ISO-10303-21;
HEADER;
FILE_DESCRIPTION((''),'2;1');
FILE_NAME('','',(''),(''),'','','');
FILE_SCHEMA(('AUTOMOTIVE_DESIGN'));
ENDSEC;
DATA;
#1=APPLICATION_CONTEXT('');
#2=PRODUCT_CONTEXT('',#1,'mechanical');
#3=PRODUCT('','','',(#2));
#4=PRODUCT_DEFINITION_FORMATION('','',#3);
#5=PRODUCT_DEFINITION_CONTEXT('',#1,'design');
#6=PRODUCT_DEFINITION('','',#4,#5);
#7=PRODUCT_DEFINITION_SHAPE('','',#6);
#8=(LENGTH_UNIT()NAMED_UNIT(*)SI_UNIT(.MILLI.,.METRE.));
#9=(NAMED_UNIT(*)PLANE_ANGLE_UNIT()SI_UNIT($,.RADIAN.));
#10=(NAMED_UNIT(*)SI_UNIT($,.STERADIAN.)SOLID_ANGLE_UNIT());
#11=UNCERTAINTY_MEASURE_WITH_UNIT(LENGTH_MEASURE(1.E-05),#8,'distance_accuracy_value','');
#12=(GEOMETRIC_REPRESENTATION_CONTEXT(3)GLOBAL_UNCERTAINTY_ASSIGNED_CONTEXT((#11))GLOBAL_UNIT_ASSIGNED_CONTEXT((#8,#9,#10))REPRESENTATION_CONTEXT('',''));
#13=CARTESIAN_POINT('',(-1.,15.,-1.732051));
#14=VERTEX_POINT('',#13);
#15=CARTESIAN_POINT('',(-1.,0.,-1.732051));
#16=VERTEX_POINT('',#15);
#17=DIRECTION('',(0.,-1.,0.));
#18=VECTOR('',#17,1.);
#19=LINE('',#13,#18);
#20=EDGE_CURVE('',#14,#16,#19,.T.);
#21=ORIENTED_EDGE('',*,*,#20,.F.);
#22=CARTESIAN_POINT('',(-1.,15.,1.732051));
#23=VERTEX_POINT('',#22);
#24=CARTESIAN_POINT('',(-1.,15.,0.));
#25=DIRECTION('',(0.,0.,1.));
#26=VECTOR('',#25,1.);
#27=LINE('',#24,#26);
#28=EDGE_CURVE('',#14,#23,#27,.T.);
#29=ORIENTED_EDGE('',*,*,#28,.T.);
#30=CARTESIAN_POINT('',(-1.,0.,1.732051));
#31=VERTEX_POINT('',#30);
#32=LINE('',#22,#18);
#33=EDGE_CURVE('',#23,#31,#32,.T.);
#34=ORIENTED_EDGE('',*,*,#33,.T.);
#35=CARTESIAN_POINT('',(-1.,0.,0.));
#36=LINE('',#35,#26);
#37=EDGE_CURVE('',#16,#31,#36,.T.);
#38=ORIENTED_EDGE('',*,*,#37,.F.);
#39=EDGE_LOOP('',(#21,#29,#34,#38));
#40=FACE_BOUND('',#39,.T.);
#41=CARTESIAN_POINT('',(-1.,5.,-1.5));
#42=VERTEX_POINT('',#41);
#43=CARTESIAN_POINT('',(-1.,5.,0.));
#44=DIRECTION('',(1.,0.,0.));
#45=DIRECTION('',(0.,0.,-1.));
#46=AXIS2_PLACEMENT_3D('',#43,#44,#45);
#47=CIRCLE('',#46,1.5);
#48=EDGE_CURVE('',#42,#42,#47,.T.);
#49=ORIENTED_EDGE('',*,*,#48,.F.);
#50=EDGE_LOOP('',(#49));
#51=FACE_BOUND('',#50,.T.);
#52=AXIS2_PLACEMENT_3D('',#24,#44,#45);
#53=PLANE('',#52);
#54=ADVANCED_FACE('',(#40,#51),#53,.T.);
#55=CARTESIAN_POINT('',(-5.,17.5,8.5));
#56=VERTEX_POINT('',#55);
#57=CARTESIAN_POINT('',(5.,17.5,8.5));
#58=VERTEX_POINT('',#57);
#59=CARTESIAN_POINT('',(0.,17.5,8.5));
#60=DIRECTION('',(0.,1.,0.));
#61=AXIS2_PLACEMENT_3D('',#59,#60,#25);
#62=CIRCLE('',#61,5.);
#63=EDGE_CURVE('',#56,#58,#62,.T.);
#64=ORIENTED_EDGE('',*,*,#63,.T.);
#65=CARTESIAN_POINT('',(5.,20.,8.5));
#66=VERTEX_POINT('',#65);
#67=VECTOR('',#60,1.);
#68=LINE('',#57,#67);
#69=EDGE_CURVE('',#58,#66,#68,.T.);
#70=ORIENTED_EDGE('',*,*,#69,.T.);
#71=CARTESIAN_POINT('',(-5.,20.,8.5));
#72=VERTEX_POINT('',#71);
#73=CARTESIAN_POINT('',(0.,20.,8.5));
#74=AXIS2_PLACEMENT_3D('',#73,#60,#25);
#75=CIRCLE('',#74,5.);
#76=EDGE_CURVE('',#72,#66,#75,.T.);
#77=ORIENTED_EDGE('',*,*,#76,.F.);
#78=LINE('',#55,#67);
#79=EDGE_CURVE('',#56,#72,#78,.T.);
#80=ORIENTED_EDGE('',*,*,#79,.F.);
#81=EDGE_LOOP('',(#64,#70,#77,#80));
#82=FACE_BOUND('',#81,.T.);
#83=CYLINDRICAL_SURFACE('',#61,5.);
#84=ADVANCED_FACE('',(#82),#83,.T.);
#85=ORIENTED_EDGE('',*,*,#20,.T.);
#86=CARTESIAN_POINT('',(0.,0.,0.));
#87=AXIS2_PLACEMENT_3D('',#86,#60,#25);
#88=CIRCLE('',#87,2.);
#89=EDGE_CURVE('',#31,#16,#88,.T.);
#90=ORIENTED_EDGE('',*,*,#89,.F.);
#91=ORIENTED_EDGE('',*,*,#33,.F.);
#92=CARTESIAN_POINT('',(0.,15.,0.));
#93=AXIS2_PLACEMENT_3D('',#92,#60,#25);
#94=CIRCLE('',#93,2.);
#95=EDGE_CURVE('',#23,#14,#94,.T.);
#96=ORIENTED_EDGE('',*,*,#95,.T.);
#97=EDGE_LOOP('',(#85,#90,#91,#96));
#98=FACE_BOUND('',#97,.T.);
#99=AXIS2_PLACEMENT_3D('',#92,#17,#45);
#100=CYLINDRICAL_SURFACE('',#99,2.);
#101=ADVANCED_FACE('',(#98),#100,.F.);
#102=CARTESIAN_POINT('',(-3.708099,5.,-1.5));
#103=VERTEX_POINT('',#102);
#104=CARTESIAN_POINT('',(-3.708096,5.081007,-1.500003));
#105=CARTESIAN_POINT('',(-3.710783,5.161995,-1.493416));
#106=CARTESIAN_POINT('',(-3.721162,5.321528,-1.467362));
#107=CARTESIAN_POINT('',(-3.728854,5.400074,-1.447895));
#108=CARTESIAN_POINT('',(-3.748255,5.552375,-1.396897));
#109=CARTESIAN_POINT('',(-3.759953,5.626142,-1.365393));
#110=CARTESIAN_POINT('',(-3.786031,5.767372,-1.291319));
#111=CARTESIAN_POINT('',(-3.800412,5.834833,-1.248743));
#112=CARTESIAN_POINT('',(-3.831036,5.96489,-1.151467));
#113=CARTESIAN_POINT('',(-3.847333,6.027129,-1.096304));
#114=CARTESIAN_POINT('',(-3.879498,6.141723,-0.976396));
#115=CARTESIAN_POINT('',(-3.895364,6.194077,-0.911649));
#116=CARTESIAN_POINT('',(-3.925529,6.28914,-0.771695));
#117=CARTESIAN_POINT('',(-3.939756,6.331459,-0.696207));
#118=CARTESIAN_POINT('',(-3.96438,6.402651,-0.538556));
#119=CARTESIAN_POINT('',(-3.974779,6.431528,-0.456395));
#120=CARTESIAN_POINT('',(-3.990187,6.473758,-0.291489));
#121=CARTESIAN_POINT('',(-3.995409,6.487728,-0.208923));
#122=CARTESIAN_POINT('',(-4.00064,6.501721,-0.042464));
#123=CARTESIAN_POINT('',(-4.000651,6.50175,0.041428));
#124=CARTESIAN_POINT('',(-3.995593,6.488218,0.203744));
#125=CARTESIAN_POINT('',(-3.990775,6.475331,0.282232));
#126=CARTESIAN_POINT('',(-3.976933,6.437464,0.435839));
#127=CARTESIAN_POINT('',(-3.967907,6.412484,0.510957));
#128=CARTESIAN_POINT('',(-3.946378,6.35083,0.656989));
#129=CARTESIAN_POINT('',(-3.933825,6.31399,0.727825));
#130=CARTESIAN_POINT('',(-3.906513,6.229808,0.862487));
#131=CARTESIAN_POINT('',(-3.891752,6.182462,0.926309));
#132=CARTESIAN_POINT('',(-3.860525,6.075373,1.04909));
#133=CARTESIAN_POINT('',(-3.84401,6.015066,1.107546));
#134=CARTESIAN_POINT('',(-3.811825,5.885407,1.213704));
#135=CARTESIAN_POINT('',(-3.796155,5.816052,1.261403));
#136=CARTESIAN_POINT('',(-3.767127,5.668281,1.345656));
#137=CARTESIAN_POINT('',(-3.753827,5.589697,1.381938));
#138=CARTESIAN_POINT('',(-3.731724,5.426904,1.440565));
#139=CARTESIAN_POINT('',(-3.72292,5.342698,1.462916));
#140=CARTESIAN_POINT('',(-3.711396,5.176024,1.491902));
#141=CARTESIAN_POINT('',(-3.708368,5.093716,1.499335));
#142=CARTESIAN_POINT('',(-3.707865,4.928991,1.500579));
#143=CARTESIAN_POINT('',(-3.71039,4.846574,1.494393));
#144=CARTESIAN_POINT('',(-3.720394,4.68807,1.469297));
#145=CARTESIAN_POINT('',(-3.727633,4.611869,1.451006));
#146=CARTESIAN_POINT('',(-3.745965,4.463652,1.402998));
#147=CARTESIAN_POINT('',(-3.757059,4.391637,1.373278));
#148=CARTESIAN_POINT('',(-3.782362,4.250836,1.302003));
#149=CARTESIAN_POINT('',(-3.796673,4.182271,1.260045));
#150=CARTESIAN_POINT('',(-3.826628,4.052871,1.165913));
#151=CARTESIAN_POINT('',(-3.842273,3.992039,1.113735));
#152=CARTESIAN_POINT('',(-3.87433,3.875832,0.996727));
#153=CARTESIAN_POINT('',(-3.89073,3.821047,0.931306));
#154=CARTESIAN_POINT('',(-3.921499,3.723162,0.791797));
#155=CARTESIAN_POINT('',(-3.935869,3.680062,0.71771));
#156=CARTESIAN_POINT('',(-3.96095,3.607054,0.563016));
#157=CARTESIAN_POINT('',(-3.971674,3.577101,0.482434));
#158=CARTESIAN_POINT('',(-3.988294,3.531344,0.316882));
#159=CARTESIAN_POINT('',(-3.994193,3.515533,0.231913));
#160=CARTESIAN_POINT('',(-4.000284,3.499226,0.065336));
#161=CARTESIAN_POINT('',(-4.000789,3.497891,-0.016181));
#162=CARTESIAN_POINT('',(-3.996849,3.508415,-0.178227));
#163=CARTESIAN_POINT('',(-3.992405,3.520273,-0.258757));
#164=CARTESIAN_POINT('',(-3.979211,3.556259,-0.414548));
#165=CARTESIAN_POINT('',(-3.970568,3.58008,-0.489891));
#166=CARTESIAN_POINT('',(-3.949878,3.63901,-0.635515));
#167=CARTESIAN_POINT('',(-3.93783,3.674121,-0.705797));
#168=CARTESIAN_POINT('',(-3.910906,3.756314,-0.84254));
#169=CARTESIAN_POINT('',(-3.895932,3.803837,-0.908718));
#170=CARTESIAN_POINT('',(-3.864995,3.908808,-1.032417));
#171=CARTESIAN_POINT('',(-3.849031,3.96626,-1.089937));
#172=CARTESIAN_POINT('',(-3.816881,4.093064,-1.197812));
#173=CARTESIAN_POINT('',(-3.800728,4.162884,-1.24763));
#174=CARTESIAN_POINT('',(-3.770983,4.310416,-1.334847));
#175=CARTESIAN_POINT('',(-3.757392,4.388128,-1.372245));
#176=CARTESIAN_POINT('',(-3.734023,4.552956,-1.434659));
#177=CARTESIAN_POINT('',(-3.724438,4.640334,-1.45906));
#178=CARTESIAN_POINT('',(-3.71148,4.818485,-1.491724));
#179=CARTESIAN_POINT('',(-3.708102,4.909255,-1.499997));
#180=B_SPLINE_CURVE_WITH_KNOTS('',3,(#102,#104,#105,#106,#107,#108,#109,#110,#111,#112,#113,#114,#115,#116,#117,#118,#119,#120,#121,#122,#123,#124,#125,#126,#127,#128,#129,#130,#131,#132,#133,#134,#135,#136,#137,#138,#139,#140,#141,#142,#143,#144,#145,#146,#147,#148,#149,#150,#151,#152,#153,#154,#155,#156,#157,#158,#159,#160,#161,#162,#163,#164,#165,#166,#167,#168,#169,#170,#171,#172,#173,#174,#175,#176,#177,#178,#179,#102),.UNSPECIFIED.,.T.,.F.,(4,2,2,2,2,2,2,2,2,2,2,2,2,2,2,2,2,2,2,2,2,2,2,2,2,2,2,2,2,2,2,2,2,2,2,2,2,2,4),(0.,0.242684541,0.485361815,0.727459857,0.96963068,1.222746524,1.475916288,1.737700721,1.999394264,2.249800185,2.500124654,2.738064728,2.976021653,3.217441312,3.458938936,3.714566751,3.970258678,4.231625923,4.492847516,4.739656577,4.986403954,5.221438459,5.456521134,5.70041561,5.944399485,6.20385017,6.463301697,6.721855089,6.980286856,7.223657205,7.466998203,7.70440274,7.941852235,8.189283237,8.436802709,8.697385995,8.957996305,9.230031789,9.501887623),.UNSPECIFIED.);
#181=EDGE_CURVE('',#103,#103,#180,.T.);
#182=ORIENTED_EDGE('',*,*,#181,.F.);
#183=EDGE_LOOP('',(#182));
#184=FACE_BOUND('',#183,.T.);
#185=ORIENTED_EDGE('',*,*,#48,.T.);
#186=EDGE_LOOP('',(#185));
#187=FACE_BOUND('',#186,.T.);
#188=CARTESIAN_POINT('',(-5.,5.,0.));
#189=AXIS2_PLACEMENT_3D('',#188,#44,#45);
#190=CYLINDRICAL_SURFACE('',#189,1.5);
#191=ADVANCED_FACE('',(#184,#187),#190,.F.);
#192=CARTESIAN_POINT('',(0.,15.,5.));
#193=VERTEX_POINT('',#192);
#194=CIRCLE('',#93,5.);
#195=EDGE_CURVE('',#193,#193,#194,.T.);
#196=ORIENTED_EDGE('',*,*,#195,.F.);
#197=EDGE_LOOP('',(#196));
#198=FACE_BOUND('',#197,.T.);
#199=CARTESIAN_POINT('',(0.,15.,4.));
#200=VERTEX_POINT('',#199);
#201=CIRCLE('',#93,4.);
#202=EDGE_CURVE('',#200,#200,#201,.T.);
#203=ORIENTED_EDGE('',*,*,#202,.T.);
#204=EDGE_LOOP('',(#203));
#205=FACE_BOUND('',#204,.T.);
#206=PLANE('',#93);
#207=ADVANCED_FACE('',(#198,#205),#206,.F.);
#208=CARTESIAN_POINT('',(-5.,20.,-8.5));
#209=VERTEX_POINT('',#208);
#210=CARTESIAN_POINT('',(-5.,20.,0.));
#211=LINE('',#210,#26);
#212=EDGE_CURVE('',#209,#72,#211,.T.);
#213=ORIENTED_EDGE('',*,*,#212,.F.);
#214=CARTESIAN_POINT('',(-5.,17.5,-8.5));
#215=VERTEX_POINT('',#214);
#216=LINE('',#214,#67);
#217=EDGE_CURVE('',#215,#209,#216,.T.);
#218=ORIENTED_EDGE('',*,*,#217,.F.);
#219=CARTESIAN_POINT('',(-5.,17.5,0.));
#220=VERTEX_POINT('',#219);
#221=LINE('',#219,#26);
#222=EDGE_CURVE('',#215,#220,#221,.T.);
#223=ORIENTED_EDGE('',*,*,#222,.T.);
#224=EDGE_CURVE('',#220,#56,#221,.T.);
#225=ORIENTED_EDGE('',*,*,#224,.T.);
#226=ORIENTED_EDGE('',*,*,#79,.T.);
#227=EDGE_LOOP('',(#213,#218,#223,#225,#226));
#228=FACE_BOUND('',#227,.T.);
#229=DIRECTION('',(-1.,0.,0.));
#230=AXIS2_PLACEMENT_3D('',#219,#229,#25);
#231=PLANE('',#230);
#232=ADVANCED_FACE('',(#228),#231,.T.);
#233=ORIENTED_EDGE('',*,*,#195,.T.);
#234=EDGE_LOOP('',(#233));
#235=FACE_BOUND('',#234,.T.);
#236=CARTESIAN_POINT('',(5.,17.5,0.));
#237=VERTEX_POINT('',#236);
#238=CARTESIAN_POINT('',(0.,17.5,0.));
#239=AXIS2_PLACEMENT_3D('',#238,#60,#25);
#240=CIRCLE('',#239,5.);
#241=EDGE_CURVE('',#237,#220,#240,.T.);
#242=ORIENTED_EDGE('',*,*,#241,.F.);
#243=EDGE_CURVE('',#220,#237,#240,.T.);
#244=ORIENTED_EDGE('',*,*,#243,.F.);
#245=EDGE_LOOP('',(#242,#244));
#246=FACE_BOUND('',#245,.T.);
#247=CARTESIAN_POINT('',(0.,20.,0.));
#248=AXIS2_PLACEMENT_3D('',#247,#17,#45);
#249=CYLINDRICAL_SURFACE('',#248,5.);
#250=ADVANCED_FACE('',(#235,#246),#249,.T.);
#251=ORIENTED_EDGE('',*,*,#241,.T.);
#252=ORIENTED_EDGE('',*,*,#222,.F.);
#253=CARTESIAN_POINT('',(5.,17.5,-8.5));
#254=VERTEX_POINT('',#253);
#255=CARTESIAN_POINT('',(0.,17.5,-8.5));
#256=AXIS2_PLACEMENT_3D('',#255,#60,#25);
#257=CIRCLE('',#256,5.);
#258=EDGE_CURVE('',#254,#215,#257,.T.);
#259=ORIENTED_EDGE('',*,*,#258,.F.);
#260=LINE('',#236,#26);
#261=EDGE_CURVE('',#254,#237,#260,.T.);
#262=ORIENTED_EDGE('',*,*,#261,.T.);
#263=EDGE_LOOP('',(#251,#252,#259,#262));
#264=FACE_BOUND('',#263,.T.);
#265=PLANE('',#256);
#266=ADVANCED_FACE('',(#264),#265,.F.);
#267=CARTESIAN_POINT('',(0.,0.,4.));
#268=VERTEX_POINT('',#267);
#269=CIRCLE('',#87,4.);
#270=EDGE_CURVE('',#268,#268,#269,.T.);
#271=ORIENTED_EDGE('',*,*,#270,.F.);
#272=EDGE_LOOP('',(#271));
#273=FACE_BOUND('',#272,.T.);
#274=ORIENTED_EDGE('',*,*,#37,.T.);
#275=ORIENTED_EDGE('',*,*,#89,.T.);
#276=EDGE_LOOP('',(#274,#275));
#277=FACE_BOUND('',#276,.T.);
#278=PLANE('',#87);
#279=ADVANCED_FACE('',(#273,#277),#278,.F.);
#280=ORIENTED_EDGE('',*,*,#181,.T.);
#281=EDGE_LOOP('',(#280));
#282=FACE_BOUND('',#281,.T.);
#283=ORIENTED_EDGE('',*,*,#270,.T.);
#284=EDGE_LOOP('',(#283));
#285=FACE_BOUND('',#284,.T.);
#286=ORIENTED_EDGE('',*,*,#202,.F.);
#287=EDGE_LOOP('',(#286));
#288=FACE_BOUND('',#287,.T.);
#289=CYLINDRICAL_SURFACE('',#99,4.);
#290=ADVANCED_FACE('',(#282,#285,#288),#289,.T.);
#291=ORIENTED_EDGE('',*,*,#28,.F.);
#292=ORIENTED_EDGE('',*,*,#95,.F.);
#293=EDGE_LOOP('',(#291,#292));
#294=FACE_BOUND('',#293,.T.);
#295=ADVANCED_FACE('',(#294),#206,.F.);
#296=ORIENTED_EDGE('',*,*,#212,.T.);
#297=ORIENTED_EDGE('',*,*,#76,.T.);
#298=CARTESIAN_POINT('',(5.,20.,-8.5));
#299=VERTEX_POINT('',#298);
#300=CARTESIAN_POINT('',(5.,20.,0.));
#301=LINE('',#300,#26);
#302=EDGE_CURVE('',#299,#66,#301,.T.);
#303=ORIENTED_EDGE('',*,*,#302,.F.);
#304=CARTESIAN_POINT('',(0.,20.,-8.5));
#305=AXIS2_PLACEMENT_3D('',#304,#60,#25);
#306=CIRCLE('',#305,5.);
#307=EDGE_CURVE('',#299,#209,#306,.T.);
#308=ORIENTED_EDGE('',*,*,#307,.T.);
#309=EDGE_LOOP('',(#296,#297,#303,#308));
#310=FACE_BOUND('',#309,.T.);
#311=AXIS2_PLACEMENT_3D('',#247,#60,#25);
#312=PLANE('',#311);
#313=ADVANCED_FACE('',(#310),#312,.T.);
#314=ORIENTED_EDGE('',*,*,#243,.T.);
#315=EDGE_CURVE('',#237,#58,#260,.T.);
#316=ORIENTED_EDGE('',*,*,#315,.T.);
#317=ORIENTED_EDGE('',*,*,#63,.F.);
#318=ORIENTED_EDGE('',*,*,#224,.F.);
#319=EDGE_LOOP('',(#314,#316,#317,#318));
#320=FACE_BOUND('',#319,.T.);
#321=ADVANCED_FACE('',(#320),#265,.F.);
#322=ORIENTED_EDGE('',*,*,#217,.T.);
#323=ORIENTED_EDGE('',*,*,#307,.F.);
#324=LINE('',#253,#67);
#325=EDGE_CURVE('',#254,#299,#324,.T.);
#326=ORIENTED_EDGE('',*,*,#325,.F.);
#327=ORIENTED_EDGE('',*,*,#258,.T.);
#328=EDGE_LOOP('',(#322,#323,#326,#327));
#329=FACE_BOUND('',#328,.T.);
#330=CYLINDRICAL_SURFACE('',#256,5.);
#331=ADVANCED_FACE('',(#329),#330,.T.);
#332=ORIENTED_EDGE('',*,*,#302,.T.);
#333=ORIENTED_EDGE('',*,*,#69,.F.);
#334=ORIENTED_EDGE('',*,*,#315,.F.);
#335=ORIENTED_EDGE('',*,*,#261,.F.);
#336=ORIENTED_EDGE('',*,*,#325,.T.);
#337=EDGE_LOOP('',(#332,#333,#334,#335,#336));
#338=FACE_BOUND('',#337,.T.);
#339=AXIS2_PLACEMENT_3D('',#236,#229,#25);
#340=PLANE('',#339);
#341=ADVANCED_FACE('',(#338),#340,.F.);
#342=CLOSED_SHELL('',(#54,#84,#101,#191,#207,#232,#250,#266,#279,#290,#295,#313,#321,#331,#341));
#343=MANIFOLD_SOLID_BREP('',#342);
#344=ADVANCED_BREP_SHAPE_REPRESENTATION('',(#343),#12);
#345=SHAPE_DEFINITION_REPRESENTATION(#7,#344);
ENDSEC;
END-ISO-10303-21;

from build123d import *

# Parameters (mm, degrees)
SKETCH3_R                 = 4
BOSS_EXTRUDE1_DEPTH       = 15
BOSS_EXTRUDE2_START       = 15
SKETCH3_3_R               = 5
BOSS_EXTRUDE2_DEPTH       = 5
BOSS_EXTRUDE3_START       = 20
BOSS_EXTRUDE3_DEPTH       = 2.5
CUT_EXTRUDE1_DEPTH        = 15
GRUB_START                = -4.0000001
GRUB_SCREW_HOLE_OUTLINE_R = 1.5
GRUB_SCREW_HOLE_DEPTH     = 3.0000001


# Read off the part's stored shape, not the designer's step: Grub Screw Hole
with BuildPart() as part:
    # Sketch3 → Boss-Extrude1 (new body)
    with BuildSketch(Plane(origin=(0, 0, 0), x_dir=(1, 0, 0), z_dir=(0, 1, 0))):
        with Locations(Location((0, 0, 0), (0, 0, 270))):
            Circle(SKETCH3_R)
    extrude(amount=BOSS_EXTRUDE1_DEPTH)

    # Sketch3<3> → Boss-Extrude2 (add)
    with BuildSketch(Plane(origin=(0, 0, 0), x_dir=(1, 0, 0), z_dir=(0, 1, 0)).offset(BOSS_EXTRUDE2_START)):
        with Locations(Location((0, 0, 0), (0, 0, 270))):
            Circle(SKETCH3_3_R)
    extrude(amount=BOSS_EXTRUDE2_DEPTH)

    # Sketch3<5> → Boss-Extrude3 (add)
    with BuildSketch(Plane(origin=(0, 0, 0), x_dir=(1, 0, 0), z_dir=(0, 1, 0)).offset(BOSS_EXTRUDE3_START)):
        with BuildLine():
            Line((-5, -8.5), (-5, 8.5))
            ThreePointArc((-5, 8.5), (0, 13.5), (5, 8.5))
            Line((5, 8.5), (5, -8.5))
            ThreePointArc((5, -8.5), (0, -13.5), (-5, -8.5))
        make_face()
    extrude(amount=-BOSS_EXTRUDE3_DEPTH)

    # Sketch5 → Cut-Extrude1 (cut)
    with BuildSketch(Plane(origin=(0, 0, 0), x_dir=(1, 0, 0), z_dir=(0, 1, 0))):
        with BuildLine():
            ThreePointArc((2, 0), (1, 1.732050808), (-1, 1.732050808))
            Line((-1, 1.732050808), (-1, -1.732050808))
            ThreePointArc((-1, -1.732050808), (1, -1.732050808), (2, 0))
        make_face()
    extrude(amount=CUT_EXTRUDE1_DEPTH, mode=Mode.SUBTRACT)

    # Grub Screw Hole outline → Grub Screw Hole (cut)
    with BuildSketch(Plane(origin=(0, 0, 0), x_dir=(0, 0, -1), z_dir=(1, 0, 0)).offset(GRUB_START)):
        with Locations((0, 5)):
            Circle(GRUB_SCREW_HOLE_OUTLINE_R)
    extrude(amount=GRUB_SCREW_HOLE_DEPTH, mode=Mode.SUBTRACT)


solid = part.part
